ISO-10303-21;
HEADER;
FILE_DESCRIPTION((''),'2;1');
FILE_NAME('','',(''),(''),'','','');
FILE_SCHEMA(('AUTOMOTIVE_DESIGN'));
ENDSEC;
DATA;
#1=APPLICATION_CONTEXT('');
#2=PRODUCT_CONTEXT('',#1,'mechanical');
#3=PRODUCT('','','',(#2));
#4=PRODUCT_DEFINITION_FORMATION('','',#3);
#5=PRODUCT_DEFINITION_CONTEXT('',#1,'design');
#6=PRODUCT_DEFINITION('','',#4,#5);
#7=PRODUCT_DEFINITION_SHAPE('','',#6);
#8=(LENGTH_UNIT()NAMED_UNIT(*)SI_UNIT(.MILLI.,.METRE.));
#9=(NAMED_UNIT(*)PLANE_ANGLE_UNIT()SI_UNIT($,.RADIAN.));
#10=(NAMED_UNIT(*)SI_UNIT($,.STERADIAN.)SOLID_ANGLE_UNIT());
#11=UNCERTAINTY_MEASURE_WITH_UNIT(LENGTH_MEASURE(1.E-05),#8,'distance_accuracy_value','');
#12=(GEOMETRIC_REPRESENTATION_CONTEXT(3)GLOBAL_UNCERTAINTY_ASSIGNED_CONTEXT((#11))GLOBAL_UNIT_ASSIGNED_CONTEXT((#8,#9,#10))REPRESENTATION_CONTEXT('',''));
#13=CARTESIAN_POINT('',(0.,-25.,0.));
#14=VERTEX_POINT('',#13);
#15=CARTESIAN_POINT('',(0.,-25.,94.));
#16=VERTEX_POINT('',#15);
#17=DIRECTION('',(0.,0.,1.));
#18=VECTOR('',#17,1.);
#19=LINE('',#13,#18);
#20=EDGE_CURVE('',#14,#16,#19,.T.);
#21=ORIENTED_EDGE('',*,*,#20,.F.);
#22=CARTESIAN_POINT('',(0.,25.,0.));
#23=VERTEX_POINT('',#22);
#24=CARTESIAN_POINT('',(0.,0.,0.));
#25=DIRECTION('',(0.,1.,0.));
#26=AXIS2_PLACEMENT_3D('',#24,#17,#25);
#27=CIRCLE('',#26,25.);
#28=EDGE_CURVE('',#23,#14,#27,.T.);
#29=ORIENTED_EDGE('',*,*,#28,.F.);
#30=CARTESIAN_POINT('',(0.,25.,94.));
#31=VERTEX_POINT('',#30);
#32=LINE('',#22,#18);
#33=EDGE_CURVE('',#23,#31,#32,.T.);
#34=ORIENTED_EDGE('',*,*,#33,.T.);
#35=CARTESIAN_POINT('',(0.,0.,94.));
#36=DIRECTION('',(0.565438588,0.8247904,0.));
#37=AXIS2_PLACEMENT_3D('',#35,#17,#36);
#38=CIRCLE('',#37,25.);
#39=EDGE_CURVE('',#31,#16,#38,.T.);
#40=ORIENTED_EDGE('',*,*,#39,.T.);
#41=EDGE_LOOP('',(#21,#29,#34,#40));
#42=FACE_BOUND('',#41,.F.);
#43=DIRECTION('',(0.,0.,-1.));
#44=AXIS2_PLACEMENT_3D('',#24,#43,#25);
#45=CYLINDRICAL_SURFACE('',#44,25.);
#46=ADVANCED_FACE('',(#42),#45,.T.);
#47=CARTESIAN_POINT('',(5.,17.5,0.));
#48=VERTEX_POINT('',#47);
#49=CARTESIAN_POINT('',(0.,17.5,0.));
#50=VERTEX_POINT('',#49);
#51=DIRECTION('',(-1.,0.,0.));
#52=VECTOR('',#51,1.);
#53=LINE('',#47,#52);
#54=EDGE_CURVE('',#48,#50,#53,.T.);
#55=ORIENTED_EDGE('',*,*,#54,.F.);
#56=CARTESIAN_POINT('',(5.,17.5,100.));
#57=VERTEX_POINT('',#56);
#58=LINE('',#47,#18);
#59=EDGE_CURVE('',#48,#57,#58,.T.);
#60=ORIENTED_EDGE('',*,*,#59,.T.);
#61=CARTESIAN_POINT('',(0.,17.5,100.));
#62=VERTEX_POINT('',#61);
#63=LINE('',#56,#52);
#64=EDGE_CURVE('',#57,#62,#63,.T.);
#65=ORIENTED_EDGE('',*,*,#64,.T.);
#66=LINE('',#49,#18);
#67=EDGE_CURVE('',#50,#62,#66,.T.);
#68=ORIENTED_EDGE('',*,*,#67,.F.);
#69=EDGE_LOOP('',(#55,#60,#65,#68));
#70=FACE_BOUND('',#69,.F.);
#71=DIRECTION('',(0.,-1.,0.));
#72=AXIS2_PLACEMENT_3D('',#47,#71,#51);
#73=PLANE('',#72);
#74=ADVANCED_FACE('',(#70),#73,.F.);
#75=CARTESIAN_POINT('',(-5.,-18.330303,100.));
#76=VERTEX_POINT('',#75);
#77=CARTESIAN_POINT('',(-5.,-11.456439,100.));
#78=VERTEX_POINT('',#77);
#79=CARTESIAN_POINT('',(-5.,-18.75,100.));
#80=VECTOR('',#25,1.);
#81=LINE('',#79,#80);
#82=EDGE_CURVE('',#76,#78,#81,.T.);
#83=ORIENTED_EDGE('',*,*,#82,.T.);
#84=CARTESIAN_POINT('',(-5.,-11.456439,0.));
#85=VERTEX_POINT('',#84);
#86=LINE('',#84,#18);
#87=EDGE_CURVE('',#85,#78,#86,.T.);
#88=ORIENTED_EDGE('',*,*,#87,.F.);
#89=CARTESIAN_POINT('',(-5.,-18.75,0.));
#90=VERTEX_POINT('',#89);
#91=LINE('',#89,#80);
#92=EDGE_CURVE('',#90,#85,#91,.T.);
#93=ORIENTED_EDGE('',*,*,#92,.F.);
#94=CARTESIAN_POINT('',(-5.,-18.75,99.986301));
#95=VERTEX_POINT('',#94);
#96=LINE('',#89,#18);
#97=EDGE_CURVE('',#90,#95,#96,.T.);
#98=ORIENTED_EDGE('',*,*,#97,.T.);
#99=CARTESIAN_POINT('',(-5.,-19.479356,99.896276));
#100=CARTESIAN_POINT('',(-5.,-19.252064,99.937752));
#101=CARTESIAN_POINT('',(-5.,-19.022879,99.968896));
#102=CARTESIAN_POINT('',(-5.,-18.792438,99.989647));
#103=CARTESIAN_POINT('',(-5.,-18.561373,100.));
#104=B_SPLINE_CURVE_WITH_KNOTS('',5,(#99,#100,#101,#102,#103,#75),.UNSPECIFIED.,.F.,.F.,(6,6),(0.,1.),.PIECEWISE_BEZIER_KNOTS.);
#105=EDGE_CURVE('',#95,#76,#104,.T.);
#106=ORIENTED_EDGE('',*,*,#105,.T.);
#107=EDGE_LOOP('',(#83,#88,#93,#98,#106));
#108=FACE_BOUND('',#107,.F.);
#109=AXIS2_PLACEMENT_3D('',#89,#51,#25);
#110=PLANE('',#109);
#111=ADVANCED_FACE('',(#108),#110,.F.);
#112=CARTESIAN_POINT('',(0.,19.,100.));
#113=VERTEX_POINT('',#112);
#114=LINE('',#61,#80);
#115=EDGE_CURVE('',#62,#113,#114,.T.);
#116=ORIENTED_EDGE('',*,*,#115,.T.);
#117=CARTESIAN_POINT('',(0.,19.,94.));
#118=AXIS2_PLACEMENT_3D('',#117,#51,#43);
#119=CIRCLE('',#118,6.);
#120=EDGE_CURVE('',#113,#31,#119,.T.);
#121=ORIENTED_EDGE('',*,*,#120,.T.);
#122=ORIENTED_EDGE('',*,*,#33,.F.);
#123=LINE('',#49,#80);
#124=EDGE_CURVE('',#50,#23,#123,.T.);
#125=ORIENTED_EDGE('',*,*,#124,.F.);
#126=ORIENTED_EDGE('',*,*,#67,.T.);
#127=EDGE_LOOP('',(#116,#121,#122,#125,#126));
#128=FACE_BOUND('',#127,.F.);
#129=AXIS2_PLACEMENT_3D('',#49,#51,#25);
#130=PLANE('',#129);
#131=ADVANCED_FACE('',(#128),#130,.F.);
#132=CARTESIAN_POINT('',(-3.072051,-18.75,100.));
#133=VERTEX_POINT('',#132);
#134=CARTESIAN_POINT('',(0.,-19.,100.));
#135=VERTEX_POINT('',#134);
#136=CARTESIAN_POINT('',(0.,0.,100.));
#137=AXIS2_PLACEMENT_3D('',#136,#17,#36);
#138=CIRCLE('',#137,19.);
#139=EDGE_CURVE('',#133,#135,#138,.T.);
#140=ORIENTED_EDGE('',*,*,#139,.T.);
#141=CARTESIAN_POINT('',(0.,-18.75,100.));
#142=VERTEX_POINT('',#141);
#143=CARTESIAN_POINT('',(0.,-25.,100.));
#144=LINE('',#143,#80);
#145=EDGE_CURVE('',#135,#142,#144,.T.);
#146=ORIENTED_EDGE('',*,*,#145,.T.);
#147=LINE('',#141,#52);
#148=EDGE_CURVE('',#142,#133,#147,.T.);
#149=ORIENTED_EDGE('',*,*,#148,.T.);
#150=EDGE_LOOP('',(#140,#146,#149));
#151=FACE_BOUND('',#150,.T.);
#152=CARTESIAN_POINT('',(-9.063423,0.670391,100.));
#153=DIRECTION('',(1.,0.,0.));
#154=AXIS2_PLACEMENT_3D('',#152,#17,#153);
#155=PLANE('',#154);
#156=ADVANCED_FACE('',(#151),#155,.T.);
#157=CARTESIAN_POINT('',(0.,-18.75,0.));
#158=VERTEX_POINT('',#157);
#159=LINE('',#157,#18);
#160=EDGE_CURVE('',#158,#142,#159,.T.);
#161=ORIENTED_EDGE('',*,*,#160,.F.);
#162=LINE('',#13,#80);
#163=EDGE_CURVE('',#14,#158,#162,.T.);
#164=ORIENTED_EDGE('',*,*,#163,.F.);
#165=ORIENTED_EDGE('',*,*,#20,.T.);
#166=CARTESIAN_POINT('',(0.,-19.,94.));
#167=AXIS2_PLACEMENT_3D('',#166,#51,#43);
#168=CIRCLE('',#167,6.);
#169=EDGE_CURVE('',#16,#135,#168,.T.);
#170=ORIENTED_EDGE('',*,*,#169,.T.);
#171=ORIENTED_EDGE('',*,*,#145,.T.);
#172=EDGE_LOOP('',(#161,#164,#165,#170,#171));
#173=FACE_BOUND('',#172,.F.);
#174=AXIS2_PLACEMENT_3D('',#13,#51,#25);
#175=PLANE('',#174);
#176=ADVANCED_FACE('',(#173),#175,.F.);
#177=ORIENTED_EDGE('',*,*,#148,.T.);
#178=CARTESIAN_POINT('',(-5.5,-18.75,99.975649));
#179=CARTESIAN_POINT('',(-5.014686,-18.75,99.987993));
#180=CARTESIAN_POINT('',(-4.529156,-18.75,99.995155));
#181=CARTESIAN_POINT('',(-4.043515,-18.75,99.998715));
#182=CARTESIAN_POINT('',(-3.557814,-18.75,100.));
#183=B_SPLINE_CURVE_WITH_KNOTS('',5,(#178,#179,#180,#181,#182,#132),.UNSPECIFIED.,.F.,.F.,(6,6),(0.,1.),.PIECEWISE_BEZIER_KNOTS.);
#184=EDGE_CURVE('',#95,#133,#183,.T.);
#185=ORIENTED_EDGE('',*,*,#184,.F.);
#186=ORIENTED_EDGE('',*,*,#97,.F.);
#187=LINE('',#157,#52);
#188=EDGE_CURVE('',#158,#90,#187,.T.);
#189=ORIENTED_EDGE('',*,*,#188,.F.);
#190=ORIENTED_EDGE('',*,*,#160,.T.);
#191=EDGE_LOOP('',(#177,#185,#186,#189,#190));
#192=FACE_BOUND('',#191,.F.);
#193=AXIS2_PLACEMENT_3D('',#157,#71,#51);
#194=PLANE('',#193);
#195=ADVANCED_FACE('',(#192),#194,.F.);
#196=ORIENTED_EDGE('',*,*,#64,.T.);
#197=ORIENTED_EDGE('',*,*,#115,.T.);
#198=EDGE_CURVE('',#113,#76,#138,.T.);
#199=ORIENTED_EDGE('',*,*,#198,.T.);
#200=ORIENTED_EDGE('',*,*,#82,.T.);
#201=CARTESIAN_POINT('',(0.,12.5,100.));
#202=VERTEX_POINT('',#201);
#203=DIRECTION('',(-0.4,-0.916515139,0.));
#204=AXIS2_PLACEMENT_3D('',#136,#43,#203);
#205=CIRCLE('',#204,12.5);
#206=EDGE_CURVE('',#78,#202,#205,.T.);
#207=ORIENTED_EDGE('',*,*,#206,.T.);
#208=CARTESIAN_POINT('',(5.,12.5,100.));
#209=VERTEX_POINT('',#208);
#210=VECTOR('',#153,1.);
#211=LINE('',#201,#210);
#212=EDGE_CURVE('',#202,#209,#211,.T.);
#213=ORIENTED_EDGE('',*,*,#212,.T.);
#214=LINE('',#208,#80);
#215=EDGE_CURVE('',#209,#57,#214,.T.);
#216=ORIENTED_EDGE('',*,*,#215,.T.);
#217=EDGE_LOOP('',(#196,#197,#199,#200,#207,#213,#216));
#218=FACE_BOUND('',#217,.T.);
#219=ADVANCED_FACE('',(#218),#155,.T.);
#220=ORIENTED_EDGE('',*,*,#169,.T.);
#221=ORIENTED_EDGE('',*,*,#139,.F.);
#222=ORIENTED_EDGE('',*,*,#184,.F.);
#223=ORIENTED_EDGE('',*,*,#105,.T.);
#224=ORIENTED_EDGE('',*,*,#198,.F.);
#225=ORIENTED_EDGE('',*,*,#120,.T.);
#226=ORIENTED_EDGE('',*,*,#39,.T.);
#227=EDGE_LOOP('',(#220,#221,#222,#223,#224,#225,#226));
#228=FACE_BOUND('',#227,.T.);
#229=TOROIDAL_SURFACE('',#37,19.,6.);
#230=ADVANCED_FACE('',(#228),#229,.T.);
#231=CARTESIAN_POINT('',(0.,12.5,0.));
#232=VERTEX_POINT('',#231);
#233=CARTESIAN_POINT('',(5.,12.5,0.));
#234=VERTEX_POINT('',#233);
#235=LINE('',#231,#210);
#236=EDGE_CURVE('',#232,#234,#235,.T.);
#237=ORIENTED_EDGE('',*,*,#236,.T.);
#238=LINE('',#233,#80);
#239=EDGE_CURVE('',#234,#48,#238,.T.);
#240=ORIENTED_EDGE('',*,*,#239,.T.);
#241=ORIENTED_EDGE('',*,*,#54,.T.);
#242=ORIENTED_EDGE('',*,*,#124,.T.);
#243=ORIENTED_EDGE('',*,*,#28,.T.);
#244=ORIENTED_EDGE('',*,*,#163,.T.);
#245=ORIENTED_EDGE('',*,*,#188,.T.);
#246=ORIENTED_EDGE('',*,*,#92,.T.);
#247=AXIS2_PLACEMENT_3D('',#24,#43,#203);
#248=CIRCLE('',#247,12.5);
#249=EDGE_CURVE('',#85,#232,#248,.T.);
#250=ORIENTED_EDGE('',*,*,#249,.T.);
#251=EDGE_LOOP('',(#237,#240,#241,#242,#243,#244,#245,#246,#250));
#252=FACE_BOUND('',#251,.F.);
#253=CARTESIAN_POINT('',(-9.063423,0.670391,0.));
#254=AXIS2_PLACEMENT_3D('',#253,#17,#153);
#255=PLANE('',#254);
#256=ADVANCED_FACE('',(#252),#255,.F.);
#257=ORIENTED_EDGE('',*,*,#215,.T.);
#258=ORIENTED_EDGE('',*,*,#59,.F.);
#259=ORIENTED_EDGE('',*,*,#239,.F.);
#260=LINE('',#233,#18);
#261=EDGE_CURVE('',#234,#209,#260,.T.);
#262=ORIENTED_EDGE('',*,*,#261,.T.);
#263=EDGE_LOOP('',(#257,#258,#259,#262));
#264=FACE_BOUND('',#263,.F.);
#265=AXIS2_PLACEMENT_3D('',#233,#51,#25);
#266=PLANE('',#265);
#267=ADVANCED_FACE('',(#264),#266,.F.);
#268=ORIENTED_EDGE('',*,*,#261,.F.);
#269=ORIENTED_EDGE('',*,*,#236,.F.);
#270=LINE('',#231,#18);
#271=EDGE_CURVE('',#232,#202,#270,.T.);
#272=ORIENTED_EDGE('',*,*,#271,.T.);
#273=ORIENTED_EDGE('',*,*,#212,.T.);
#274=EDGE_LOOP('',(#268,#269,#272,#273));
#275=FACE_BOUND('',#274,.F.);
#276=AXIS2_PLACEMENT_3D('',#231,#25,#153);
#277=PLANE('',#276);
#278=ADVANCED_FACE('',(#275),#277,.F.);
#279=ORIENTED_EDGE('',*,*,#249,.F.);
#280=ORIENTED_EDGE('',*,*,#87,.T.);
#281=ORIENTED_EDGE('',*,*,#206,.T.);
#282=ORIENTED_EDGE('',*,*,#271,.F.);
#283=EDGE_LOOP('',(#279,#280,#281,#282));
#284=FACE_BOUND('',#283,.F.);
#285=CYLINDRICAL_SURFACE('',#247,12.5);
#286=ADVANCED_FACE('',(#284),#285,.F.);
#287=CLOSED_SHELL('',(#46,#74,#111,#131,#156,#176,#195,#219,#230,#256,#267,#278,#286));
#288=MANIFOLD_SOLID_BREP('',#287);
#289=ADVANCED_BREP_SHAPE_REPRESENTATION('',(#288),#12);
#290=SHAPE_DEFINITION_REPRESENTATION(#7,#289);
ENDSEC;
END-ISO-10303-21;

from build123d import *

# Parameters (mm, degrees)
F1_DEPTH    = 100
F2_T2_ANGLE = 248.8655063523


# Not quite as in the source:
# - a fillet or chamfer that OpenCascade refuses, or shapes differently, is made with other operations: its cross-section is extruded or revolved along the edge and cut away or added


with BuildPart() as f1:
    # F0 (on Top) → F1 (new body)
    with BuildSketch(Plane.XY):
        with BuildLine():
            ThreePointArc((-5, -11.4564392374), (-12.2363289116, 2.5538705461), (0, 12.5))
            Line((0, 12.5), (5, 12.5))
            Line((5, 12.5), (5, 17.5))
            Line((5, 17.5), (0, 17.5))
            Line((0, 17.5), (0, 25))
            ThreePointArc((0, 25), (-25, 0), (0, -25))
            Line((0, -25), (0, -18.75))
            Line((0, -18.75), (-5, -18.75))
            Line((-5, -18.75), (-5, -11.4564392374))
        make_face()
    extrude(amount=F1_DEPTH)

    # F2: fillet of radius 6 on 1 edges, made by hand

    # F2_s1 → F2_t2 (revolve, cut)
    with BuildSketch(Plane(origin=(0, 0, 0), x_dir=(0, 0, 1), z_dir=(0.8247903997, -0.5654385878, 0))):
        with BuildLine():
            ThreePointArc((94, -25), (98.2426406871, -23.2426406871), (100, -19))
            Line((100, -19), (100, -25))
            Line((100, -25), (94, -25))
        make_face()
    revolve(axis=Axis((0, 0, 100), (0, 0, 1)), revolution_arc=F2_T2_ANGLE, mode=Mode.SUBTRACT)


solid = f1.part
